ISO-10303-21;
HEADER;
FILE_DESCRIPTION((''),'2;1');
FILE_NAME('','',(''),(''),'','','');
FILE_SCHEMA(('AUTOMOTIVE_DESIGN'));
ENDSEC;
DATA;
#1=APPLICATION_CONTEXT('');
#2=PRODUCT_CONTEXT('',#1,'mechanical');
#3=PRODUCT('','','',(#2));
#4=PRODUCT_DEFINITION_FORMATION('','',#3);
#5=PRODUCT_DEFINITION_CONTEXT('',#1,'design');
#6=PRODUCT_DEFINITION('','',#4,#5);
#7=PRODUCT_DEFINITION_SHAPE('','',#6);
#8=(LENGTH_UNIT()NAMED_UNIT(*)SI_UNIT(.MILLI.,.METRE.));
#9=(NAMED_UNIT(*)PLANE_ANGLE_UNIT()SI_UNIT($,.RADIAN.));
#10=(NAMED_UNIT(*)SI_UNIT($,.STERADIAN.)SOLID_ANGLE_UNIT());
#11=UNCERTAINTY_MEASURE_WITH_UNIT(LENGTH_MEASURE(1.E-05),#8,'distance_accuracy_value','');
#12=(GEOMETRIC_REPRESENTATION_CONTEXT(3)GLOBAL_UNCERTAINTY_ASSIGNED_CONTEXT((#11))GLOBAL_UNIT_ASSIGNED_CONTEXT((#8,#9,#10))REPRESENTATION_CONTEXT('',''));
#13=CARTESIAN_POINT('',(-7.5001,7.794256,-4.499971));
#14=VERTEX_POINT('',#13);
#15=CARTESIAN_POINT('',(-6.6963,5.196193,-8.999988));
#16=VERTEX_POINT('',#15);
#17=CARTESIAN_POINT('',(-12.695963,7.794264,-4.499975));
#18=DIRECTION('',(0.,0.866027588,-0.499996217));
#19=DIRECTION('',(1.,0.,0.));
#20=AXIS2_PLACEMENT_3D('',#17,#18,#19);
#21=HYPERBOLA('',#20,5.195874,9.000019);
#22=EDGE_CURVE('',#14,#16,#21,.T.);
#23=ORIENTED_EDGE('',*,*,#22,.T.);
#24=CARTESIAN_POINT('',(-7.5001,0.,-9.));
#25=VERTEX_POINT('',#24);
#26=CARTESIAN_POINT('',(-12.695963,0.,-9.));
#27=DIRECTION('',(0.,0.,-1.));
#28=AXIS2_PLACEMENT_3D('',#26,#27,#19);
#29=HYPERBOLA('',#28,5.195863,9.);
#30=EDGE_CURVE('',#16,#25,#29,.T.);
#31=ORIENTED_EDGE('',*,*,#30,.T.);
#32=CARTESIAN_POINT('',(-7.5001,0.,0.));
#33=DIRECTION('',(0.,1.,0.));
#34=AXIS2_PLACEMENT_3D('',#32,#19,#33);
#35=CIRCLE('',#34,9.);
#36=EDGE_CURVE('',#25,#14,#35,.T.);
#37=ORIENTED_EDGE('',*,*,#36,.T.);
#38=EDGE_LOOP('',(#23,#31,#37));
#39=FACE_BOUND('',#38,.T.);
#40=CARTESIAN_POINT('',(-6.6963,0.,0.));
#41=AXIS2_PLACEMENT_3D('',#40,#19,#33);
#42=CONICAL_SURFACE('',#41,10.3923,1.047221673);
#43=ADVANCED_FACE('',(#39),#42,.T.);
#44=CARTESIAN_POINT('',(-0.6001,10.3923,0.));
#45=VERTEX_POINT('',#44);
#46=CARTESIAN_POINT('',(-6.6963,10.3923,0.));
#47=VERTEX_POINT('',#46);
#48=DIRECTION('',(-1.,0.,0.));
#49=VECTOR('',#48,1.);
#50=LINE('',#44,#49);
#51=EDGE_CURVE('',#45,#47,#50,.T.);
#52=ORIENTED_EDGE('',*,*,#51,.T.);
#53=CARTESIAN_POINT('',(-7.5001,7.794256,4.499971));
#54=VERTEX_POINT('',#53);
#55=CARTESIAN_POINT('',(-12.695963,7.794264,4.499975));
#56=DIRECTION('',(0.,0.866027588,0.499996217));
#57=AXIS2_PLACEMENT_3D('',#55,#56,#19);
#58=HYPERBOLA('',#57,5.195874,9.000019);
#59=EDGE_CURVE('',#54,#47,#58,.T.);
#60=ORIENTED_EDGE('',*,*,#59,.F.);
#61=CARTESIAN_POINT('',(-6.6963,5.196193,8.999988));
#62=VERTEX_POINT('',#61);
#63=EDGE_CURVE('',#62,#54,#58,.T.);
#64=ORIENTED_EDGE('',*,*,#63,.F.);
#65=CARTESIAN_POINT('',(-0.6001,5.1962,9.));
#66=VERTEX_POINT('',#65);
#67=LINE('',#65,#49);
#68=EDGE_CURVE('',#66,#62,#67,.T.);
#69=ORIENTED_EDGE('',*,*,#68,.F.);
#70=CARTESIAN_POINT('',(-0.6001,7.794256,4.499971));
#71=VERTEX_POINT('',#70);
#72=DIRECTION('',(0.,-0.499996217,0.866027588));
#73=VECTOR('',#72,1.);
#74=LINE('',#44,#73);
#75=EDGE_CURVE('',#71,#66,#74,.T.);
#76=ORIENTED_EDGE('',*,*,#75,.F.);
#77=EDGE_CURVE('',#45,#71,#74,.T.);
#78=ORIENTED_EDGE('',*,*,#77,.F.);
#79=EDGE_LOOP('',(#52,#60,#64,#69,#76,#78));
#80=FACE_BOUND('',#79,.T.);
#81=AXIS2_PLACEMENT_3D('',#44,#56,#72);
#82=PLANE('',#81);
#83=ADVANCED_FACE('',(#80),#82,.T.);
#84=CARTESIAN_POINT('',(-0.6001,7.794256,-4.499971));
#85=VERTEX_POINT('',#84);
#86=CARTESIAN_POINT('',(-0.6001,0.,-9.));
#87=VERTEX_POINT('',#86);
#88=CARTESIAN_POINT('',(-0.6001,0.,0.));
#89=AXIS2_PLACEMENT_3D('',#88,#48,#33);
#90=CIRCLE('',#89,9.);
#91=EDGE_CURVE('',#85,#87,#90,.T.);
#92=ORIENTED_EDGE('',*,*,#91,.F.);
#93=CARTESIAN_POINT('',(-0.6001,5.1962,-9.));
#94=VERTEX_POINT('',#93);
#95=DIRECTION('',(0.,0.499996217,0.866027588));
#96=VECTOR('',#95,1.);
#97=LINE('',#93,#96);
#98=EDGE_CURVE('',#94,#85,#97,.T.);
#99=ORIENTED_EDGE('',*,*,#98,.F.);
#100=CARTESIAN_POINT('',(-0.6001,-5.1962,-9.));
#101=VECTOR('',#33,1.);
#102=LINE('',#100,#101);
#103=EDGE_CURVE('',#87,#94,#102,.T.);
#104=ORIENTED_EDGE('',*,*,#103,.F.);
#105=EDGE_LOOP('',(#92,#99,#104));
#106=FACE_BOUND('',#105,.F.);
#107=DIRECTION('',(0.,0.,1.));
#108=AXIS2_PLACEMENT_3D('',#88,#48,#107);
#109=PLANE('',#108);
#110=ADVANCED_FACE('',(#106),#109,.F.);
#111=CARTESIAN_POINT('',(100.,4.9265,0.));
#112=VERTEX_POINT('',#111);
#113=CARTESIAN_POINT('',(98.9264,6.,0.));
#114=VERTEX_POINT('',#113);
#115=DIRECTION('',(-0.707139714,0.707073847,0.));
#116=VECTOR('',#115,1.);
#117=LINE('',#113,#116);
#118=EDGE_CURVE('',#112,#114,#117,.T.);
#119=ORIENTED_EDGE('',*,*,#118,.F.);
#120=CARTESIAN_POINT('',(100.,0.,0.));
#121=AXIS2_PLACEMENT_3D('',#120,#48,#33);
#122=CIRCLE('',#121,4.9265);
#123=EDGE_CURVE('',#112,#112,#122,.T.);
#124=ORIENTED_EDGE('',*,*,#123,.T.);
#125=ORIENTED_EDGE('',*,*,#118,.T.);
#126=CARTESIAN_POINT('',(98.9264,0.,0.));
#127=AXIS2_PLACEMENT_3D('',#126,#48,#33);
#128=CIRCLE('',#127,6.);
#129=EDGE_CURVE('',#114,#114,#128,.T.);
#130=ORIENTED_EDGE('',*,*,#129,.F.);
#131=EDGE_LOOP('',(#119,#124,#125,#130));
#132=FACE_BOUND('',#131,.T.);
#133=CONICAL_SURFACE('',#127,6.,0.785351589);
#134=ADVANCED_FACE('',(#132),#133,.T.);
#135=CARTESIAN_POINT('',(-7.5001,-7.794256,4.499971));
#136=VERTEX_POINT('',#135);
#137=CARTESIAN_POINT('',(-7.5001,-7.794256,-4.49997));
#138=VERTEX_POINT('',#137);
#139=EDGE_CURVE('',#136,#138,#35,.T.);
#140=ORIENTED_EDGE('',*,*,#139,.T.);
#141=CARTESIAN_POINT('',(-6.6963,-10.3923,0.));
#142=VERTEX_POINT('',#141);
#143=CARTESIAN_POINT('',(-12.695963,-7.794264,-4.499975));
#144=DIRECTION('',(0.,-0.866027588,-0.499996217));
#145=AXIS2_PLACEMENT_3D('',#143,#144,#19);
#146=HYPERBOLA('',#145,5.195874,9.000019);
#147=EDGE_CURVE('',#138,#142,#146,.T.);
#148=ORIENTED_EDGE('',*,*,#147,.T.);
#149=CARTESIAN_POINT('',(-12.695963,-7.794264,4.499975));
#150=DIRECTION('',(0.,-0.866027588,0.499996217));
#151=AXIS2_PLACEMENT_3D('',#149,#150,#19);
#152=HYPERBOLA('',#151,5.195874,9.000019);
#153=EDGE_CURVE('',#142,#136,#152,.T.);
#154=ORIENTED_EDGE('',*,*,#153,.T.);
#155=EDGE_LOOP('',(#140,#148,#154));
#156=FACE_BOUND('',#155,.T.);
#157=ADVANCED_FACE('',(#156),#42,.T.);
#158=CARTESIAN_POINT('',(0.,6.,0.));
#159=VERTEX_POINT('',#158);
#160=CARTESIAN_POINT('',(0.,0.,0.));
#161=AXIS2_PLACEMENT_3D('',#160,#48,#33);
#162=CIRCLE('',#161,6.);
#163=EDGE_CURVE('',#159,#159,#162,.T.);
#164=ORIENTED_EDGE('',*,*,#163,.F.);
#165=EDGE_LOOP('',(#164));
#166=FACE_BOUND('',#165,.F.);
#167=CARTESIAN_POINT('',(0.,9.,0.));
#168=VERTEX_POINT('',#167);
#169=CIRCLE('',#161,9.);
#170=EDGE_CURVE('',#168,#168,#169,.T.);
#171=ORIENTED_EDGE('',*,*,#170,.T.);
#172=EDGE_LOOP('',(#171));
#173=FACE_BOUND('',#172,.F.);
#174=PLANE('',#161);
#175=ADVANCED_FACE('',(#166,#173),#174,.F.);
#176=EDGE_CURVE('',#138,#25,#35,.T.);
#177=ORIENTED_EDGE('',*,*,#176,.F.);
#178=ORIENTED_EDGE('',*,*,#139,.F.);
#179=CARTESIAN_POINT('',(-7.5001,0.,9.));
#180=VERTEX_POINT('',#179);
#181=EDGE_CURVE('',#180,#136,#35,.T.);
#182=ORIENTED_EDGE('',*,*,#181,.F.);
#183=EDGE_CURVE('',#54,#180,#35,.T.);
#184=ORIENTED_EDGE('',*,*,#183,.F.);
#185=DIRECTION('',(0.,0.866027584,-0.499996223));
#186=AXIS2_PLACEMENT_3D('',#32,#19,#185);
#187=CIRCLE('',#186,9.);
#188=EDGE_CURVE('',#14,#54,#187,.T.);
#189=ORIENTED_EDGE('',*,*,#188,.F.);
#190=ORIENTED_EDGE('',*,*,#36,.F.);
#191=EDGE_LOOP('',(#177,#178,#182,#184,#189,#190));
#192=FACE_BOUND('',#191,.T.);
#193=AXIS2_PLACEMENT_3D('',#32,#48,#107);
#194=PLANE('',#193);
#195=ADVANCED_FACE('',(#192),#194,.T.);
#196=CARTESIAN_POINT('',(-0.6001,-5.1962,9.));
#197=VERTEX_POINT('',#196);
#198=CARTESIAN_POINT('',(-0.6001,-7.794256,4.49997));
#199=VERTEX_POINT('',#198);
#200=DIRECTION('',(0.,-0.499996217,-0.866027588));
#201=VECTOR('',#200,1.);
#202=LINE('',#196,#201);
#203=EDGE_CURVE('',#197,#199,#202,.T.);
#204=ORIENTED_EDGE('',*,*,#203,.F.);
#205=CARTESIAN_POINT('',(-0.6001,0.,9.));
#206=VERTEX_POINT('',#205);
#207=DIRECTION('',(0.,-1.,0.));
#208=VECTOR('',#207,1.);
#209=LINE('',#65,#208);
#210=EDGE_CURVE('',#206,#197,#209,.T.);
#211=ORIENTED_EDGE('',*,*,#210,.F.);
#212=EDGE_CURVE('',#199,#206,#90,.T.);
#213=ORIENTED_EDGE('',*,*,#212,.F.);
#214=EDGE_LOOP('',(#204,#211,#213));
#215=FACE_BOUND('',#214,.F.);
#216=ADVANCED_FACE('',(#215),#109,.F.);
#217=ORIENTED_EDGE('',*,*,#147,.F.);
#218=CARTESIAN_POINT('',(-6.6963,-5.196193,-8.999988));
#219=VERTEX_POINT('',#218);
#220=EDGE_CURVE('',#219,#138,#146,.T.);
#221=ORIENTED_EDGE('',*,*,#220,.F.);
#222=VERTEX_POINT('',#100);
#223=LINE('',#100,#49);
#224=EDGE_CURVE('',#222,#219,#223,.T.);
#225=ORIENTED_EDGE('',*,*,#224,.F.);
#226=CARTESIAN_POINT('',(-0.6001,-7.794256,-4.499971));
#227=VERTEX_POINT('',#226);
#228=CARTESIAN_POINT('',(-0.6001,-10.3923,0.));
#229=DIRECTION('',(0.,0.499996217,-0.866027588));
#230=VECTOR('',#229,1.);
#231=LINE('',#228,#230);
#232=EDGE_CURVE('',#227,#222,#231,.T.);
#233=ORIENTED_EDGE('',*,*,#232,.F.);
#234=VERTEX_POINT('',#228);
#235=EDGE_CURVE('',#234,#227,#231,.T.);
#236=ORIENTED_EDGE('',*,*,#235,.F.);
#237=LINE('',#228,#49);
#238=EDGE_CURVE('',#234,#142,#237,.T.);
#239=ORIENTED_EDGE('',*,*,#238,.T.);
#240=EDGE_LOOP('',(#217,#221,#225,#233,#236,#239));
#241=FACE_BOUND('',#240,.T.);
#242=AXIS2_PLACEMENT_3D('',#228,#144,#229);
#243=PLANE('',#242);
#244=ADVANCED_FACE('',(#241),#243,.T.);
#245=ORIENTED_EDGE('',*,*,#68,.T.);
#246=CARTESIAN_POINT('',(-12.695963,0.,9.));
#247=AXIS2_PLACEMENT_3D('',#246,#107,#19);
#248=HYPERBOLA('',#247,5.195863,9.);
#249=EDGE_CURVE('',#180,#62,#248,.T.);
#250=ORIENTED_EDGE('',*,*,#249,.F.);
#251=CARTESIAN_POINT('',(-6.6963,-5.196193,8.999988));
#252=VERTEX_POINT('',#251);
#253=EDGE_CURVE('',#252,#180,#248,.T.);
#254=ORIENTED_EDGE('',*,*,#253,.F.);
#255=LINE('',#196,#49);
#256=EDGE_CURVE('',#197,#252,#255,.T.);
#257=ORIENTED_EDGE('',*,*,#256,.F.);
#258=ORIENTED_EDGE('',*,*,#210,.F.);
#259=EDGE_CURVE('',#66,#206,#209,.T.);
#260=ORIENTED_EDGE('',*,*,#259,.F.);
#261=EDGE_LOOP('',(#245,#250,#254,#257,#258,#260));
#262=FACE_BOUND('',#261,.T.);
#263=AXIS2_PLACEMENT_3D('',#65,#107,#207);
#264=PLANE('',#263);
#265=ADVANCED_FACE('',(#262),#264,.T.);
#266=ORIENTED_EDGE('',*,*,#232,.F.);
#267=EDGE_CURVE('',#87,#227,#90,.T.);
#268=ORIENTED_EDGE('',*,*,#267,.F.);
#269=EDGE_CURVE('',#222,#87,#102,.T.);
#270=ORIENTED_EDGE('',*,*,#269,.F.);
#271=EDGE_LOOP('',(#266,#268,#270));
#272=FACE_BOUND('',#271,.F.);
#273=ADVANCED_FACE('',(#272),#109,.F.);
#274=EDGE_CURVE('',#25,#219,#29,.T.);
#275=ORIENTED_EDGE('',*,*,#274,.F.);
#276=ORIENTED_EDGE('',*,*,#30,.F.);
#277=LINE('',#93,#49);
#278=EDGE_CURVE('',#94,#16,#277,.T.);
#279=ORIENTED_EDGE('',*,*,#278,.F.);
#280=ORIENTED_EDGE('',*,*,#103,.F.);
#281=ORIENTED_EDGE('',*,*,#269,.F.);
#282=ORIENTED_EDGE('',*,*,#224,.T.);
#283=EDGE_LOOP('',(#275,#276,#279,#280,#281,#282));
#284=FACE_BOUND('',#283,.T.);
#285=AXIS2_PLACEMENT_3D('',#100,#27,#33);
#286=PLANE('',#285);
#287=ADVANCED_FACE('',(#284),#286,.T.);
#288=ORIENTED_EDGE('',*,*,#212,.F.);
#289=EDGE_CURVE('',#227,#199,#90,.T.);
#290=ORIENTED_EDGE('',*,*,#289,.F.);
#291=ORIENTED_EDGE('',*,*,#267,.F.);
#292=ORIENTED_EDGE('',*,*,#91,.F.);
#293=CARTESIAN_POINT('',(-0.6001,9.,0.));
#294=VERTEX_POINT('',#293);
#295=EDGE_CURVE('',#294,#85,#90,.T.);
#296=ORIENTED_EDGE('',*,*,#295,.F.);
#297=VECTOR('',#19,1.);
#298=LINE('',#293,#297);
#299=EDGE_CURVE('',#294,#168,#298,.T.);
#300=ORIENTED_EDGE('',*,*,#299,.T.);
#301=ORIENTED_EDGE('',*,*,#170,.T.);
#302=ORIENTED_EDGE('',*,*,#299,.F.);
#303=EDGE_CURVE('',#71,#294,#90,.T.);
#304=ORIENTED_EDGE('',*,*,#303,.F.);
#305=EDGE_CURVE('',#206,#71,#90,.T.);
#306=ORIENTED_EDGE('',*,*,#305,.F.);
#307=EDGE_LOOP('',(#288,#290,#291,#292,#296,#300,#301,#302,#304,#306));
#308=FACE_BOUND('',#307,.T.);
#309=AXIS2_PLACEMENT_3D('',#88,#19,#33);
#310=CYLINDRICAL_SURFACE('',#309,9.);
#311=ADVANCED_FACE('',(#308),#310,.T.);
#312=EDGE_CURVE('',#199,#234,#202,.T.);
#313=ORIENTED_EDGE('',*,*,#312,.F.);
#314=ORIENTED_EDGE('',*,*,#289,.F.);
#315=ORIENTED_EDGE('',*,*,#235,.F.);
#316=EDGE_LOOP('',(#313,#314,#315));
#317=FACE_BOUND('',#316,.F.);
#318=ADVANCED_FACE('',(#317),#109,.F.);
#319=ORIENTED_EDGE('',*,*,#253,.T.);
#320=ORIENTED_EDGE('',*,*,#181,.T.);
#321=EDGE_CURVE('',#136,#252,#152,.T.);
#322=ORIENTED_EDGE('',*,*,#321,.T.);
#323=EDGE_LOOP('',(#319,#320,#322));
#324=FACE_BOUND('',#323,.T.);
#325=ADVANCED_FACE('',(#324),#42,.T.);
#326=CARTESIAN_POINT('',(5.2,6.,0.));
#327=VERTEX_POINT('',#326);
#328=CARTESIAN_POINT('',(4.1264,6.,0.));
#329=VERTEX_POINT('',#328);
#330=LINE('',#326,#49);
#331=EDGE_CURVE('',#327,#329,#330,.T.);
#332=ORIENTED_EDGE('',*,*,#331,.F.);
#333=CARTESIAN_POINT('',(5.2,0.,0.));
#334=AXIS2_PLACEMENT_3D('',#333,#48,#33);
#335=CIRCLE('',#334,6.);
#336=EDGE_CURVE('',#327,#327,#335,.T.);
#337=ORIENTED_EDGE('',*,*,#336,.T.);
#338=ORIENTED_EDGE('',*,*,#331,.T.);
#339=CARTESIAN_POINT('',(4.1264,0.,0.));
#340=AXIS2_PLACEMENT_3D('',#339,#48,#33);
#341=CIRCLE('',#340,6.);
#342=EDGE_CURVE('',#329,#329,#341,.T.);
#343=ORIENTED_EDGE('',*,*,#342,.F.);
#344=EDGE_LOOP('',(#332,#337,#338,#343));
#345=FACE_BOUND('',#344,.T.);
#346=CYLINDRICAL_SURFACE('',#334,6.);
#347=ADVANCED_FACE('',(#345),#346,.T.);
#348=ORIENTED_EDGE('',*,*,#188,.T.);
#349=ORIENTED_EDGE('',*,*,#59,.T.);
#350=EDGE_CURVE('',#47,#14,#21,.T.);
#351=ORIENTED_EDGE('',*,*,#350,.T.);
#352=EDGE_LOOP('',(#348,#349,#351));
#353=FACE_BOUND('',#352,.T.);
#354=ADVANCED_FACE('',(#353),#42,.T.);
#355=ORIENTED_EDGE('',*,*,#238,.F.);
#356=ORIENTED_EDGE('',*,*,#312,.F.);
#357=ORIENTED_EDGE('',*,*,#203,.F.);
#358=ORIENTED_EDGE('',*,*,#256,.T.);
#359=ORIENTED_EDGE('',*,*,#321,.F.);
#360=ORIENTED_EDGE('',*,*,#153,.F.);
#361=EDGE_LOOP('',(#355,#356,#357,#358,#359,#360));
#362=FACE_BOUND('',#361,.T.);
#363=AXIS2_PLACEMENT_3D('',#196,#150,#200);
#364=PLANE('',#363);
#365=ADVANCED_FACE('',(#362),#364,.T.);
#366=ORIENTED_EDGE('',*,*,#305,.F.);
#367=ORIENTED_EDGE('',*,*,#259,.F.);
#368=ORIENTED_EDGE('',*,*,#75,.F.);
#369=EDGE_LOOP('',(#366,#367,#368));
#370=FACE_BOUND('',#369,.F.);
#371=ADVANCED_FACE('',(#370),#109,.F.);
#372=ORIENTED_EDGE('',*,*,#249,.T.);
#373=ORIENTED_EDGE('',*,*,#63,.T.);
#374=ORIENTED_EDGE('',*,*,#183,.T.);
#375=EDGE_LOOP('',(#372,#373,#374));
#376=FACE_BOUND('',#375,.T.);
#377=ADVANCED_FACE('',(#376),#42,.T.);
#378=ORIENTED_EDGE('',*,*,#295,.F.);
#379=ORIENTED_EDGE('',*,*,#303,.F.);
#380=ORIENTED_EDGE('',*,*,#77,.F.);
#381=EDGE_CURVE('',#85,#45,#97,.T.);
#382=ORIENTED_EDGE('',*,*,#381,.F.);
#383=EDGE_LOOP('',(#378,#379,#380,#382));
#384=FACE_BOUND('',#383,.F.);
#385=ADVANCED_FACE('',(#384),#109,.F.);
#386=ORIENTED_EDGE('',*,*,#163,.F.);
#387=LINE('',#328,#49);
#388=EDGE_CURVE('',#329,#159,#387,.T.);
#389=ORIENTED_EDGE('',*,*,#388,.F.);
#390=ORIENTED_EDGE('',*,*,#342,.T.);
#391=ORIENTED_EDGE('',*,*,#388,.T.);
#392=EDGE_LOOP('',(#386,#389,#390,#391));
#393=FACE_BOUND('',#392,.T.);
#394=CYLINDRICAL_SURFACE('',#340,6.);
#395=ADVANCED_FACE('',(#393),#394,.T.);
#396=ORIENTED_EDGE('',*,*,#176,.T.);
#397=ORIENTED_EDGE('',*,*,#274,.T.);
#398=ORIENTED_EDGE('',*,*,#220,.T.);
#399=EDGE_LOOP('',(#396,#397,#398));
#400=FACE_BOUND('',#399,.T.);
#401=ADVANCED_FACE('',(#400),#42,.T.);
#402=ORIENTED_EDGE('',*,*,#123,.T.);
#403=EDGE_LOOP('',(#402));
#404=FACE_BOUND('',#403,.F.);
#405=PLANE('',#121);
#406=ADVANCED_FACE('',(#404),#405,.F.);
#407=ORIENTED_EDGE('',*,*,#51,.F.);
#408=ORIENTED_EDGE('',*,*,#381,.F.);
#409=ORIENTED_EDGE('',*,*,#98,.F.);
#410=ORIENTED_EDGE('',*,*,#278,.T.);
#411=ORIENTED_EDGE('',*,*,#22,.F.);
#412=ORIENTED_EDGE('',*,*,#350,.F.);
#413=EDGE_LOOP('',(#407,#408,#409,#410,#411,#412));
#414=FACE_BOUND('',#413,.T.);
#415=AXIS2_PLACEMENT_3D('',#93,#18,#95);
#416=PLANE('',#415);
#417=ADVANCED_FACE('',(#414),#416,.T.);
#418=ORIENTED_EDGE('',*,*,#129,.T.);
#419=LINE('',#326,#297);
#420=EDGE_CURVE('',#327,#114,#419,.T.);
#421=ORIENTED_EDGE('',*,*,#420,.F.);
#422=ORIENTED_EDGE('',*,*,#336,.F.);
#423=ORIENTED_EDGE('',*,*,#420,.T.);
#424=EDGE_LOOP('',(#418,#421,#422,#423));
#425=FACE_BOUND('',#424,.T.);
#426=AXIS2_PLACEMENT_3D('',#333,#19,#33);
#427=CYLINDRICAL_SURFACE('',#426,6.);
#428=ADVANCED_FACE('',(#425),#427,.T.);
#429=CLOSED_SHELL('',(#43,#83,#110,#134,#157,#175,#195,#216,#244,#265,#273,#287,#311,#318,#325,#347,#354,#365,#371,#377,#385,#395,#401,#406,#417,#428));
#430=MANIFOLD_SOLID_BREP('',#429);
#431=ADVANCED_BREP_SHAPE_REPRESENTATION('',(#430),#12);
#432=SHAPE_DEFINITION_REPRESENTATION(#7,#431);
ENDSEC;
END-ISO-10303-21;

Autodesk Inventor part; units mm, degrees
ref_plane "YZ Plane" through (0, 0, 0) normal (1, 0, 0) x (0, 1, 0)
ref_plane "XZ Plane" through (0, 0, 0) normal (0, 1, 0) x (-1, 0, 0)
sketch "Sketch1" plane through (0, 0, 0) normal (0, 0, 1) x (1, 0, 0)
  line L0 (0, 9) -> (0, 6)
  line L1 (5.2, 6) -> (100, 6)
  line L2 (100, 6) -> (100, 0)
  line L3 (100, 0) -> (-0.6001, 0)
  line L4 (-20.7201, 0) -> (120.12, 0) projected
  line L5 (-0.6001, 0) -> (-0.6001, 9)
  line L6 (-0.6001, 9) -> (0, 9)
  line L7 (5.2, 6) -> (4.1264, 6)
  line L8 (4.1264, 6) -> (0, 6)
  line L9 (0, -1.8) -> (0, 10.8) projected
  dimension "d0" = 100
  dimension "d1" = 94.8
  dimension "d2" = 12
  dimension "d9" = 0.6001
  dimension "d10" = 18
  dimension "d13" = 1.0736
  dimension "d14" = 12
revolve "Body" add sketch "Sketch1" angle 360 about axis through (100, 0, 0) along (-1, 0, 0)
sketch "Sketch2" plane through (-0.6001, 0, 0) normal (-1, 0, 0) x (0, 0, 1)
  line L0 (0, 10.3923) -> (9, 5.1962)
  line L1 (9, 5.1962) -> (9, -5.1962)
  line L2 (9, -5.1962) -> (0, -10.3923)
  line L3 (0, -10.3923) -> (-9, -5.1962)
  line L4 (-9, -5.1962) -> (-9, 5.1962)
  line L5 (-9, 5.1962) -> (0, 10.3923)
  point P0 (0, 0)
  point P1 (0, 0)
  dimension "d11" = 18
extrude "Head" add sketch "Sketch2" along normal blind 6.9
sketch "Sketch4" plane through (0, 0, 0) normal (0, 0, 1) x (1, 0, 0)
  line L0 (-7.5001, 9) -> (-7.5001, 10.3923)
  line L1 (-7.5001, 10.3923) -> (-6.6963, 10.3923)
  line L2 (-6.6963, 10.3923) -> (-7.5001, 9)
  line L3 (-8.8801, 0) -> (0.7799, 0) projected
  line L4 (-0.6001, 10.3923) -> (-7.5001, 10.3923) projected
  line L5 (-7.5001, 5.1962) -> (-7.5001, 10.3923) projected
  dimension "d5" = 30
  dimension "d19" = 18
revolve "Chamfer1" cut sketch "Sketch4" angle 360 about axis through (-10, 0, 0) along (1, 0, 0)
thread "Thread" size "M12x1.75" class "6g" standard "ISO Metric profile" length 94.8
chamfer "Chamfer2" distance 1.0735 distance2 1.0736 1 edges at (100, -6, 0) measured on face at (100, 1.8579, -1.646)
ref_plane "Work Plane1" through (1.525, 0, 0) normal (0, 0, 1) x (1, 0, 0)
equation "\"d0\" = NLG"
equation "\"d1\" = GEL"
equation "\"d2\" = GD"
equation "\"d10\" = SD2"
equation "\"d14\" = BDM"
equation "\"d11\" = SW"
equation "\"d3\" = KOH - SD"
equation "\"d5\" = ANG1"
equation "\"d19\" = SW0"
equation "\"d15\" = GEL"
equation "\"d6\" = -0.5 * SPD + 0.5 * GD"
equation "\"NLG\" = 100"
equation "\"GD\" = NND"
equation "\"BDM\" = NND"
equation "\"KOH\" = 7.5"
equation "\"GEL\" = 94.8"
equation "\"SW\" = 18"
equation "\"SW0\" = SW"
equation "\"SPD\" = NND - 1.2269 * PTC"
equation "\"SD2\" = SW"
equation "\"SD\" = 0.6"
equation "\"ANG1\" = 30deg"
equation "\"GAL\" = 0.61345 * PTC"
equation "\"GUL\" = 0.61345 * PTC"
equation "\"RR\" = 0.6"
equation "\"WFT\" = SD"
equation "\"GD1\" = THREADDIA - 1.2269 * PTC"
equation "\"THREADDIA\" = 12"
equation "\"SDH\" = SW"
equation "\"TOA\" = 30deg"
equation "\"FAWI\" = 45deg"
equation "\"PTC\" = 1.75"
equation "\"NND\" = 12"
equation "\"E0\" = 1.155 * SW"
properties part number "AS 1110 - M12 x 100" material "Steel, Mild"
